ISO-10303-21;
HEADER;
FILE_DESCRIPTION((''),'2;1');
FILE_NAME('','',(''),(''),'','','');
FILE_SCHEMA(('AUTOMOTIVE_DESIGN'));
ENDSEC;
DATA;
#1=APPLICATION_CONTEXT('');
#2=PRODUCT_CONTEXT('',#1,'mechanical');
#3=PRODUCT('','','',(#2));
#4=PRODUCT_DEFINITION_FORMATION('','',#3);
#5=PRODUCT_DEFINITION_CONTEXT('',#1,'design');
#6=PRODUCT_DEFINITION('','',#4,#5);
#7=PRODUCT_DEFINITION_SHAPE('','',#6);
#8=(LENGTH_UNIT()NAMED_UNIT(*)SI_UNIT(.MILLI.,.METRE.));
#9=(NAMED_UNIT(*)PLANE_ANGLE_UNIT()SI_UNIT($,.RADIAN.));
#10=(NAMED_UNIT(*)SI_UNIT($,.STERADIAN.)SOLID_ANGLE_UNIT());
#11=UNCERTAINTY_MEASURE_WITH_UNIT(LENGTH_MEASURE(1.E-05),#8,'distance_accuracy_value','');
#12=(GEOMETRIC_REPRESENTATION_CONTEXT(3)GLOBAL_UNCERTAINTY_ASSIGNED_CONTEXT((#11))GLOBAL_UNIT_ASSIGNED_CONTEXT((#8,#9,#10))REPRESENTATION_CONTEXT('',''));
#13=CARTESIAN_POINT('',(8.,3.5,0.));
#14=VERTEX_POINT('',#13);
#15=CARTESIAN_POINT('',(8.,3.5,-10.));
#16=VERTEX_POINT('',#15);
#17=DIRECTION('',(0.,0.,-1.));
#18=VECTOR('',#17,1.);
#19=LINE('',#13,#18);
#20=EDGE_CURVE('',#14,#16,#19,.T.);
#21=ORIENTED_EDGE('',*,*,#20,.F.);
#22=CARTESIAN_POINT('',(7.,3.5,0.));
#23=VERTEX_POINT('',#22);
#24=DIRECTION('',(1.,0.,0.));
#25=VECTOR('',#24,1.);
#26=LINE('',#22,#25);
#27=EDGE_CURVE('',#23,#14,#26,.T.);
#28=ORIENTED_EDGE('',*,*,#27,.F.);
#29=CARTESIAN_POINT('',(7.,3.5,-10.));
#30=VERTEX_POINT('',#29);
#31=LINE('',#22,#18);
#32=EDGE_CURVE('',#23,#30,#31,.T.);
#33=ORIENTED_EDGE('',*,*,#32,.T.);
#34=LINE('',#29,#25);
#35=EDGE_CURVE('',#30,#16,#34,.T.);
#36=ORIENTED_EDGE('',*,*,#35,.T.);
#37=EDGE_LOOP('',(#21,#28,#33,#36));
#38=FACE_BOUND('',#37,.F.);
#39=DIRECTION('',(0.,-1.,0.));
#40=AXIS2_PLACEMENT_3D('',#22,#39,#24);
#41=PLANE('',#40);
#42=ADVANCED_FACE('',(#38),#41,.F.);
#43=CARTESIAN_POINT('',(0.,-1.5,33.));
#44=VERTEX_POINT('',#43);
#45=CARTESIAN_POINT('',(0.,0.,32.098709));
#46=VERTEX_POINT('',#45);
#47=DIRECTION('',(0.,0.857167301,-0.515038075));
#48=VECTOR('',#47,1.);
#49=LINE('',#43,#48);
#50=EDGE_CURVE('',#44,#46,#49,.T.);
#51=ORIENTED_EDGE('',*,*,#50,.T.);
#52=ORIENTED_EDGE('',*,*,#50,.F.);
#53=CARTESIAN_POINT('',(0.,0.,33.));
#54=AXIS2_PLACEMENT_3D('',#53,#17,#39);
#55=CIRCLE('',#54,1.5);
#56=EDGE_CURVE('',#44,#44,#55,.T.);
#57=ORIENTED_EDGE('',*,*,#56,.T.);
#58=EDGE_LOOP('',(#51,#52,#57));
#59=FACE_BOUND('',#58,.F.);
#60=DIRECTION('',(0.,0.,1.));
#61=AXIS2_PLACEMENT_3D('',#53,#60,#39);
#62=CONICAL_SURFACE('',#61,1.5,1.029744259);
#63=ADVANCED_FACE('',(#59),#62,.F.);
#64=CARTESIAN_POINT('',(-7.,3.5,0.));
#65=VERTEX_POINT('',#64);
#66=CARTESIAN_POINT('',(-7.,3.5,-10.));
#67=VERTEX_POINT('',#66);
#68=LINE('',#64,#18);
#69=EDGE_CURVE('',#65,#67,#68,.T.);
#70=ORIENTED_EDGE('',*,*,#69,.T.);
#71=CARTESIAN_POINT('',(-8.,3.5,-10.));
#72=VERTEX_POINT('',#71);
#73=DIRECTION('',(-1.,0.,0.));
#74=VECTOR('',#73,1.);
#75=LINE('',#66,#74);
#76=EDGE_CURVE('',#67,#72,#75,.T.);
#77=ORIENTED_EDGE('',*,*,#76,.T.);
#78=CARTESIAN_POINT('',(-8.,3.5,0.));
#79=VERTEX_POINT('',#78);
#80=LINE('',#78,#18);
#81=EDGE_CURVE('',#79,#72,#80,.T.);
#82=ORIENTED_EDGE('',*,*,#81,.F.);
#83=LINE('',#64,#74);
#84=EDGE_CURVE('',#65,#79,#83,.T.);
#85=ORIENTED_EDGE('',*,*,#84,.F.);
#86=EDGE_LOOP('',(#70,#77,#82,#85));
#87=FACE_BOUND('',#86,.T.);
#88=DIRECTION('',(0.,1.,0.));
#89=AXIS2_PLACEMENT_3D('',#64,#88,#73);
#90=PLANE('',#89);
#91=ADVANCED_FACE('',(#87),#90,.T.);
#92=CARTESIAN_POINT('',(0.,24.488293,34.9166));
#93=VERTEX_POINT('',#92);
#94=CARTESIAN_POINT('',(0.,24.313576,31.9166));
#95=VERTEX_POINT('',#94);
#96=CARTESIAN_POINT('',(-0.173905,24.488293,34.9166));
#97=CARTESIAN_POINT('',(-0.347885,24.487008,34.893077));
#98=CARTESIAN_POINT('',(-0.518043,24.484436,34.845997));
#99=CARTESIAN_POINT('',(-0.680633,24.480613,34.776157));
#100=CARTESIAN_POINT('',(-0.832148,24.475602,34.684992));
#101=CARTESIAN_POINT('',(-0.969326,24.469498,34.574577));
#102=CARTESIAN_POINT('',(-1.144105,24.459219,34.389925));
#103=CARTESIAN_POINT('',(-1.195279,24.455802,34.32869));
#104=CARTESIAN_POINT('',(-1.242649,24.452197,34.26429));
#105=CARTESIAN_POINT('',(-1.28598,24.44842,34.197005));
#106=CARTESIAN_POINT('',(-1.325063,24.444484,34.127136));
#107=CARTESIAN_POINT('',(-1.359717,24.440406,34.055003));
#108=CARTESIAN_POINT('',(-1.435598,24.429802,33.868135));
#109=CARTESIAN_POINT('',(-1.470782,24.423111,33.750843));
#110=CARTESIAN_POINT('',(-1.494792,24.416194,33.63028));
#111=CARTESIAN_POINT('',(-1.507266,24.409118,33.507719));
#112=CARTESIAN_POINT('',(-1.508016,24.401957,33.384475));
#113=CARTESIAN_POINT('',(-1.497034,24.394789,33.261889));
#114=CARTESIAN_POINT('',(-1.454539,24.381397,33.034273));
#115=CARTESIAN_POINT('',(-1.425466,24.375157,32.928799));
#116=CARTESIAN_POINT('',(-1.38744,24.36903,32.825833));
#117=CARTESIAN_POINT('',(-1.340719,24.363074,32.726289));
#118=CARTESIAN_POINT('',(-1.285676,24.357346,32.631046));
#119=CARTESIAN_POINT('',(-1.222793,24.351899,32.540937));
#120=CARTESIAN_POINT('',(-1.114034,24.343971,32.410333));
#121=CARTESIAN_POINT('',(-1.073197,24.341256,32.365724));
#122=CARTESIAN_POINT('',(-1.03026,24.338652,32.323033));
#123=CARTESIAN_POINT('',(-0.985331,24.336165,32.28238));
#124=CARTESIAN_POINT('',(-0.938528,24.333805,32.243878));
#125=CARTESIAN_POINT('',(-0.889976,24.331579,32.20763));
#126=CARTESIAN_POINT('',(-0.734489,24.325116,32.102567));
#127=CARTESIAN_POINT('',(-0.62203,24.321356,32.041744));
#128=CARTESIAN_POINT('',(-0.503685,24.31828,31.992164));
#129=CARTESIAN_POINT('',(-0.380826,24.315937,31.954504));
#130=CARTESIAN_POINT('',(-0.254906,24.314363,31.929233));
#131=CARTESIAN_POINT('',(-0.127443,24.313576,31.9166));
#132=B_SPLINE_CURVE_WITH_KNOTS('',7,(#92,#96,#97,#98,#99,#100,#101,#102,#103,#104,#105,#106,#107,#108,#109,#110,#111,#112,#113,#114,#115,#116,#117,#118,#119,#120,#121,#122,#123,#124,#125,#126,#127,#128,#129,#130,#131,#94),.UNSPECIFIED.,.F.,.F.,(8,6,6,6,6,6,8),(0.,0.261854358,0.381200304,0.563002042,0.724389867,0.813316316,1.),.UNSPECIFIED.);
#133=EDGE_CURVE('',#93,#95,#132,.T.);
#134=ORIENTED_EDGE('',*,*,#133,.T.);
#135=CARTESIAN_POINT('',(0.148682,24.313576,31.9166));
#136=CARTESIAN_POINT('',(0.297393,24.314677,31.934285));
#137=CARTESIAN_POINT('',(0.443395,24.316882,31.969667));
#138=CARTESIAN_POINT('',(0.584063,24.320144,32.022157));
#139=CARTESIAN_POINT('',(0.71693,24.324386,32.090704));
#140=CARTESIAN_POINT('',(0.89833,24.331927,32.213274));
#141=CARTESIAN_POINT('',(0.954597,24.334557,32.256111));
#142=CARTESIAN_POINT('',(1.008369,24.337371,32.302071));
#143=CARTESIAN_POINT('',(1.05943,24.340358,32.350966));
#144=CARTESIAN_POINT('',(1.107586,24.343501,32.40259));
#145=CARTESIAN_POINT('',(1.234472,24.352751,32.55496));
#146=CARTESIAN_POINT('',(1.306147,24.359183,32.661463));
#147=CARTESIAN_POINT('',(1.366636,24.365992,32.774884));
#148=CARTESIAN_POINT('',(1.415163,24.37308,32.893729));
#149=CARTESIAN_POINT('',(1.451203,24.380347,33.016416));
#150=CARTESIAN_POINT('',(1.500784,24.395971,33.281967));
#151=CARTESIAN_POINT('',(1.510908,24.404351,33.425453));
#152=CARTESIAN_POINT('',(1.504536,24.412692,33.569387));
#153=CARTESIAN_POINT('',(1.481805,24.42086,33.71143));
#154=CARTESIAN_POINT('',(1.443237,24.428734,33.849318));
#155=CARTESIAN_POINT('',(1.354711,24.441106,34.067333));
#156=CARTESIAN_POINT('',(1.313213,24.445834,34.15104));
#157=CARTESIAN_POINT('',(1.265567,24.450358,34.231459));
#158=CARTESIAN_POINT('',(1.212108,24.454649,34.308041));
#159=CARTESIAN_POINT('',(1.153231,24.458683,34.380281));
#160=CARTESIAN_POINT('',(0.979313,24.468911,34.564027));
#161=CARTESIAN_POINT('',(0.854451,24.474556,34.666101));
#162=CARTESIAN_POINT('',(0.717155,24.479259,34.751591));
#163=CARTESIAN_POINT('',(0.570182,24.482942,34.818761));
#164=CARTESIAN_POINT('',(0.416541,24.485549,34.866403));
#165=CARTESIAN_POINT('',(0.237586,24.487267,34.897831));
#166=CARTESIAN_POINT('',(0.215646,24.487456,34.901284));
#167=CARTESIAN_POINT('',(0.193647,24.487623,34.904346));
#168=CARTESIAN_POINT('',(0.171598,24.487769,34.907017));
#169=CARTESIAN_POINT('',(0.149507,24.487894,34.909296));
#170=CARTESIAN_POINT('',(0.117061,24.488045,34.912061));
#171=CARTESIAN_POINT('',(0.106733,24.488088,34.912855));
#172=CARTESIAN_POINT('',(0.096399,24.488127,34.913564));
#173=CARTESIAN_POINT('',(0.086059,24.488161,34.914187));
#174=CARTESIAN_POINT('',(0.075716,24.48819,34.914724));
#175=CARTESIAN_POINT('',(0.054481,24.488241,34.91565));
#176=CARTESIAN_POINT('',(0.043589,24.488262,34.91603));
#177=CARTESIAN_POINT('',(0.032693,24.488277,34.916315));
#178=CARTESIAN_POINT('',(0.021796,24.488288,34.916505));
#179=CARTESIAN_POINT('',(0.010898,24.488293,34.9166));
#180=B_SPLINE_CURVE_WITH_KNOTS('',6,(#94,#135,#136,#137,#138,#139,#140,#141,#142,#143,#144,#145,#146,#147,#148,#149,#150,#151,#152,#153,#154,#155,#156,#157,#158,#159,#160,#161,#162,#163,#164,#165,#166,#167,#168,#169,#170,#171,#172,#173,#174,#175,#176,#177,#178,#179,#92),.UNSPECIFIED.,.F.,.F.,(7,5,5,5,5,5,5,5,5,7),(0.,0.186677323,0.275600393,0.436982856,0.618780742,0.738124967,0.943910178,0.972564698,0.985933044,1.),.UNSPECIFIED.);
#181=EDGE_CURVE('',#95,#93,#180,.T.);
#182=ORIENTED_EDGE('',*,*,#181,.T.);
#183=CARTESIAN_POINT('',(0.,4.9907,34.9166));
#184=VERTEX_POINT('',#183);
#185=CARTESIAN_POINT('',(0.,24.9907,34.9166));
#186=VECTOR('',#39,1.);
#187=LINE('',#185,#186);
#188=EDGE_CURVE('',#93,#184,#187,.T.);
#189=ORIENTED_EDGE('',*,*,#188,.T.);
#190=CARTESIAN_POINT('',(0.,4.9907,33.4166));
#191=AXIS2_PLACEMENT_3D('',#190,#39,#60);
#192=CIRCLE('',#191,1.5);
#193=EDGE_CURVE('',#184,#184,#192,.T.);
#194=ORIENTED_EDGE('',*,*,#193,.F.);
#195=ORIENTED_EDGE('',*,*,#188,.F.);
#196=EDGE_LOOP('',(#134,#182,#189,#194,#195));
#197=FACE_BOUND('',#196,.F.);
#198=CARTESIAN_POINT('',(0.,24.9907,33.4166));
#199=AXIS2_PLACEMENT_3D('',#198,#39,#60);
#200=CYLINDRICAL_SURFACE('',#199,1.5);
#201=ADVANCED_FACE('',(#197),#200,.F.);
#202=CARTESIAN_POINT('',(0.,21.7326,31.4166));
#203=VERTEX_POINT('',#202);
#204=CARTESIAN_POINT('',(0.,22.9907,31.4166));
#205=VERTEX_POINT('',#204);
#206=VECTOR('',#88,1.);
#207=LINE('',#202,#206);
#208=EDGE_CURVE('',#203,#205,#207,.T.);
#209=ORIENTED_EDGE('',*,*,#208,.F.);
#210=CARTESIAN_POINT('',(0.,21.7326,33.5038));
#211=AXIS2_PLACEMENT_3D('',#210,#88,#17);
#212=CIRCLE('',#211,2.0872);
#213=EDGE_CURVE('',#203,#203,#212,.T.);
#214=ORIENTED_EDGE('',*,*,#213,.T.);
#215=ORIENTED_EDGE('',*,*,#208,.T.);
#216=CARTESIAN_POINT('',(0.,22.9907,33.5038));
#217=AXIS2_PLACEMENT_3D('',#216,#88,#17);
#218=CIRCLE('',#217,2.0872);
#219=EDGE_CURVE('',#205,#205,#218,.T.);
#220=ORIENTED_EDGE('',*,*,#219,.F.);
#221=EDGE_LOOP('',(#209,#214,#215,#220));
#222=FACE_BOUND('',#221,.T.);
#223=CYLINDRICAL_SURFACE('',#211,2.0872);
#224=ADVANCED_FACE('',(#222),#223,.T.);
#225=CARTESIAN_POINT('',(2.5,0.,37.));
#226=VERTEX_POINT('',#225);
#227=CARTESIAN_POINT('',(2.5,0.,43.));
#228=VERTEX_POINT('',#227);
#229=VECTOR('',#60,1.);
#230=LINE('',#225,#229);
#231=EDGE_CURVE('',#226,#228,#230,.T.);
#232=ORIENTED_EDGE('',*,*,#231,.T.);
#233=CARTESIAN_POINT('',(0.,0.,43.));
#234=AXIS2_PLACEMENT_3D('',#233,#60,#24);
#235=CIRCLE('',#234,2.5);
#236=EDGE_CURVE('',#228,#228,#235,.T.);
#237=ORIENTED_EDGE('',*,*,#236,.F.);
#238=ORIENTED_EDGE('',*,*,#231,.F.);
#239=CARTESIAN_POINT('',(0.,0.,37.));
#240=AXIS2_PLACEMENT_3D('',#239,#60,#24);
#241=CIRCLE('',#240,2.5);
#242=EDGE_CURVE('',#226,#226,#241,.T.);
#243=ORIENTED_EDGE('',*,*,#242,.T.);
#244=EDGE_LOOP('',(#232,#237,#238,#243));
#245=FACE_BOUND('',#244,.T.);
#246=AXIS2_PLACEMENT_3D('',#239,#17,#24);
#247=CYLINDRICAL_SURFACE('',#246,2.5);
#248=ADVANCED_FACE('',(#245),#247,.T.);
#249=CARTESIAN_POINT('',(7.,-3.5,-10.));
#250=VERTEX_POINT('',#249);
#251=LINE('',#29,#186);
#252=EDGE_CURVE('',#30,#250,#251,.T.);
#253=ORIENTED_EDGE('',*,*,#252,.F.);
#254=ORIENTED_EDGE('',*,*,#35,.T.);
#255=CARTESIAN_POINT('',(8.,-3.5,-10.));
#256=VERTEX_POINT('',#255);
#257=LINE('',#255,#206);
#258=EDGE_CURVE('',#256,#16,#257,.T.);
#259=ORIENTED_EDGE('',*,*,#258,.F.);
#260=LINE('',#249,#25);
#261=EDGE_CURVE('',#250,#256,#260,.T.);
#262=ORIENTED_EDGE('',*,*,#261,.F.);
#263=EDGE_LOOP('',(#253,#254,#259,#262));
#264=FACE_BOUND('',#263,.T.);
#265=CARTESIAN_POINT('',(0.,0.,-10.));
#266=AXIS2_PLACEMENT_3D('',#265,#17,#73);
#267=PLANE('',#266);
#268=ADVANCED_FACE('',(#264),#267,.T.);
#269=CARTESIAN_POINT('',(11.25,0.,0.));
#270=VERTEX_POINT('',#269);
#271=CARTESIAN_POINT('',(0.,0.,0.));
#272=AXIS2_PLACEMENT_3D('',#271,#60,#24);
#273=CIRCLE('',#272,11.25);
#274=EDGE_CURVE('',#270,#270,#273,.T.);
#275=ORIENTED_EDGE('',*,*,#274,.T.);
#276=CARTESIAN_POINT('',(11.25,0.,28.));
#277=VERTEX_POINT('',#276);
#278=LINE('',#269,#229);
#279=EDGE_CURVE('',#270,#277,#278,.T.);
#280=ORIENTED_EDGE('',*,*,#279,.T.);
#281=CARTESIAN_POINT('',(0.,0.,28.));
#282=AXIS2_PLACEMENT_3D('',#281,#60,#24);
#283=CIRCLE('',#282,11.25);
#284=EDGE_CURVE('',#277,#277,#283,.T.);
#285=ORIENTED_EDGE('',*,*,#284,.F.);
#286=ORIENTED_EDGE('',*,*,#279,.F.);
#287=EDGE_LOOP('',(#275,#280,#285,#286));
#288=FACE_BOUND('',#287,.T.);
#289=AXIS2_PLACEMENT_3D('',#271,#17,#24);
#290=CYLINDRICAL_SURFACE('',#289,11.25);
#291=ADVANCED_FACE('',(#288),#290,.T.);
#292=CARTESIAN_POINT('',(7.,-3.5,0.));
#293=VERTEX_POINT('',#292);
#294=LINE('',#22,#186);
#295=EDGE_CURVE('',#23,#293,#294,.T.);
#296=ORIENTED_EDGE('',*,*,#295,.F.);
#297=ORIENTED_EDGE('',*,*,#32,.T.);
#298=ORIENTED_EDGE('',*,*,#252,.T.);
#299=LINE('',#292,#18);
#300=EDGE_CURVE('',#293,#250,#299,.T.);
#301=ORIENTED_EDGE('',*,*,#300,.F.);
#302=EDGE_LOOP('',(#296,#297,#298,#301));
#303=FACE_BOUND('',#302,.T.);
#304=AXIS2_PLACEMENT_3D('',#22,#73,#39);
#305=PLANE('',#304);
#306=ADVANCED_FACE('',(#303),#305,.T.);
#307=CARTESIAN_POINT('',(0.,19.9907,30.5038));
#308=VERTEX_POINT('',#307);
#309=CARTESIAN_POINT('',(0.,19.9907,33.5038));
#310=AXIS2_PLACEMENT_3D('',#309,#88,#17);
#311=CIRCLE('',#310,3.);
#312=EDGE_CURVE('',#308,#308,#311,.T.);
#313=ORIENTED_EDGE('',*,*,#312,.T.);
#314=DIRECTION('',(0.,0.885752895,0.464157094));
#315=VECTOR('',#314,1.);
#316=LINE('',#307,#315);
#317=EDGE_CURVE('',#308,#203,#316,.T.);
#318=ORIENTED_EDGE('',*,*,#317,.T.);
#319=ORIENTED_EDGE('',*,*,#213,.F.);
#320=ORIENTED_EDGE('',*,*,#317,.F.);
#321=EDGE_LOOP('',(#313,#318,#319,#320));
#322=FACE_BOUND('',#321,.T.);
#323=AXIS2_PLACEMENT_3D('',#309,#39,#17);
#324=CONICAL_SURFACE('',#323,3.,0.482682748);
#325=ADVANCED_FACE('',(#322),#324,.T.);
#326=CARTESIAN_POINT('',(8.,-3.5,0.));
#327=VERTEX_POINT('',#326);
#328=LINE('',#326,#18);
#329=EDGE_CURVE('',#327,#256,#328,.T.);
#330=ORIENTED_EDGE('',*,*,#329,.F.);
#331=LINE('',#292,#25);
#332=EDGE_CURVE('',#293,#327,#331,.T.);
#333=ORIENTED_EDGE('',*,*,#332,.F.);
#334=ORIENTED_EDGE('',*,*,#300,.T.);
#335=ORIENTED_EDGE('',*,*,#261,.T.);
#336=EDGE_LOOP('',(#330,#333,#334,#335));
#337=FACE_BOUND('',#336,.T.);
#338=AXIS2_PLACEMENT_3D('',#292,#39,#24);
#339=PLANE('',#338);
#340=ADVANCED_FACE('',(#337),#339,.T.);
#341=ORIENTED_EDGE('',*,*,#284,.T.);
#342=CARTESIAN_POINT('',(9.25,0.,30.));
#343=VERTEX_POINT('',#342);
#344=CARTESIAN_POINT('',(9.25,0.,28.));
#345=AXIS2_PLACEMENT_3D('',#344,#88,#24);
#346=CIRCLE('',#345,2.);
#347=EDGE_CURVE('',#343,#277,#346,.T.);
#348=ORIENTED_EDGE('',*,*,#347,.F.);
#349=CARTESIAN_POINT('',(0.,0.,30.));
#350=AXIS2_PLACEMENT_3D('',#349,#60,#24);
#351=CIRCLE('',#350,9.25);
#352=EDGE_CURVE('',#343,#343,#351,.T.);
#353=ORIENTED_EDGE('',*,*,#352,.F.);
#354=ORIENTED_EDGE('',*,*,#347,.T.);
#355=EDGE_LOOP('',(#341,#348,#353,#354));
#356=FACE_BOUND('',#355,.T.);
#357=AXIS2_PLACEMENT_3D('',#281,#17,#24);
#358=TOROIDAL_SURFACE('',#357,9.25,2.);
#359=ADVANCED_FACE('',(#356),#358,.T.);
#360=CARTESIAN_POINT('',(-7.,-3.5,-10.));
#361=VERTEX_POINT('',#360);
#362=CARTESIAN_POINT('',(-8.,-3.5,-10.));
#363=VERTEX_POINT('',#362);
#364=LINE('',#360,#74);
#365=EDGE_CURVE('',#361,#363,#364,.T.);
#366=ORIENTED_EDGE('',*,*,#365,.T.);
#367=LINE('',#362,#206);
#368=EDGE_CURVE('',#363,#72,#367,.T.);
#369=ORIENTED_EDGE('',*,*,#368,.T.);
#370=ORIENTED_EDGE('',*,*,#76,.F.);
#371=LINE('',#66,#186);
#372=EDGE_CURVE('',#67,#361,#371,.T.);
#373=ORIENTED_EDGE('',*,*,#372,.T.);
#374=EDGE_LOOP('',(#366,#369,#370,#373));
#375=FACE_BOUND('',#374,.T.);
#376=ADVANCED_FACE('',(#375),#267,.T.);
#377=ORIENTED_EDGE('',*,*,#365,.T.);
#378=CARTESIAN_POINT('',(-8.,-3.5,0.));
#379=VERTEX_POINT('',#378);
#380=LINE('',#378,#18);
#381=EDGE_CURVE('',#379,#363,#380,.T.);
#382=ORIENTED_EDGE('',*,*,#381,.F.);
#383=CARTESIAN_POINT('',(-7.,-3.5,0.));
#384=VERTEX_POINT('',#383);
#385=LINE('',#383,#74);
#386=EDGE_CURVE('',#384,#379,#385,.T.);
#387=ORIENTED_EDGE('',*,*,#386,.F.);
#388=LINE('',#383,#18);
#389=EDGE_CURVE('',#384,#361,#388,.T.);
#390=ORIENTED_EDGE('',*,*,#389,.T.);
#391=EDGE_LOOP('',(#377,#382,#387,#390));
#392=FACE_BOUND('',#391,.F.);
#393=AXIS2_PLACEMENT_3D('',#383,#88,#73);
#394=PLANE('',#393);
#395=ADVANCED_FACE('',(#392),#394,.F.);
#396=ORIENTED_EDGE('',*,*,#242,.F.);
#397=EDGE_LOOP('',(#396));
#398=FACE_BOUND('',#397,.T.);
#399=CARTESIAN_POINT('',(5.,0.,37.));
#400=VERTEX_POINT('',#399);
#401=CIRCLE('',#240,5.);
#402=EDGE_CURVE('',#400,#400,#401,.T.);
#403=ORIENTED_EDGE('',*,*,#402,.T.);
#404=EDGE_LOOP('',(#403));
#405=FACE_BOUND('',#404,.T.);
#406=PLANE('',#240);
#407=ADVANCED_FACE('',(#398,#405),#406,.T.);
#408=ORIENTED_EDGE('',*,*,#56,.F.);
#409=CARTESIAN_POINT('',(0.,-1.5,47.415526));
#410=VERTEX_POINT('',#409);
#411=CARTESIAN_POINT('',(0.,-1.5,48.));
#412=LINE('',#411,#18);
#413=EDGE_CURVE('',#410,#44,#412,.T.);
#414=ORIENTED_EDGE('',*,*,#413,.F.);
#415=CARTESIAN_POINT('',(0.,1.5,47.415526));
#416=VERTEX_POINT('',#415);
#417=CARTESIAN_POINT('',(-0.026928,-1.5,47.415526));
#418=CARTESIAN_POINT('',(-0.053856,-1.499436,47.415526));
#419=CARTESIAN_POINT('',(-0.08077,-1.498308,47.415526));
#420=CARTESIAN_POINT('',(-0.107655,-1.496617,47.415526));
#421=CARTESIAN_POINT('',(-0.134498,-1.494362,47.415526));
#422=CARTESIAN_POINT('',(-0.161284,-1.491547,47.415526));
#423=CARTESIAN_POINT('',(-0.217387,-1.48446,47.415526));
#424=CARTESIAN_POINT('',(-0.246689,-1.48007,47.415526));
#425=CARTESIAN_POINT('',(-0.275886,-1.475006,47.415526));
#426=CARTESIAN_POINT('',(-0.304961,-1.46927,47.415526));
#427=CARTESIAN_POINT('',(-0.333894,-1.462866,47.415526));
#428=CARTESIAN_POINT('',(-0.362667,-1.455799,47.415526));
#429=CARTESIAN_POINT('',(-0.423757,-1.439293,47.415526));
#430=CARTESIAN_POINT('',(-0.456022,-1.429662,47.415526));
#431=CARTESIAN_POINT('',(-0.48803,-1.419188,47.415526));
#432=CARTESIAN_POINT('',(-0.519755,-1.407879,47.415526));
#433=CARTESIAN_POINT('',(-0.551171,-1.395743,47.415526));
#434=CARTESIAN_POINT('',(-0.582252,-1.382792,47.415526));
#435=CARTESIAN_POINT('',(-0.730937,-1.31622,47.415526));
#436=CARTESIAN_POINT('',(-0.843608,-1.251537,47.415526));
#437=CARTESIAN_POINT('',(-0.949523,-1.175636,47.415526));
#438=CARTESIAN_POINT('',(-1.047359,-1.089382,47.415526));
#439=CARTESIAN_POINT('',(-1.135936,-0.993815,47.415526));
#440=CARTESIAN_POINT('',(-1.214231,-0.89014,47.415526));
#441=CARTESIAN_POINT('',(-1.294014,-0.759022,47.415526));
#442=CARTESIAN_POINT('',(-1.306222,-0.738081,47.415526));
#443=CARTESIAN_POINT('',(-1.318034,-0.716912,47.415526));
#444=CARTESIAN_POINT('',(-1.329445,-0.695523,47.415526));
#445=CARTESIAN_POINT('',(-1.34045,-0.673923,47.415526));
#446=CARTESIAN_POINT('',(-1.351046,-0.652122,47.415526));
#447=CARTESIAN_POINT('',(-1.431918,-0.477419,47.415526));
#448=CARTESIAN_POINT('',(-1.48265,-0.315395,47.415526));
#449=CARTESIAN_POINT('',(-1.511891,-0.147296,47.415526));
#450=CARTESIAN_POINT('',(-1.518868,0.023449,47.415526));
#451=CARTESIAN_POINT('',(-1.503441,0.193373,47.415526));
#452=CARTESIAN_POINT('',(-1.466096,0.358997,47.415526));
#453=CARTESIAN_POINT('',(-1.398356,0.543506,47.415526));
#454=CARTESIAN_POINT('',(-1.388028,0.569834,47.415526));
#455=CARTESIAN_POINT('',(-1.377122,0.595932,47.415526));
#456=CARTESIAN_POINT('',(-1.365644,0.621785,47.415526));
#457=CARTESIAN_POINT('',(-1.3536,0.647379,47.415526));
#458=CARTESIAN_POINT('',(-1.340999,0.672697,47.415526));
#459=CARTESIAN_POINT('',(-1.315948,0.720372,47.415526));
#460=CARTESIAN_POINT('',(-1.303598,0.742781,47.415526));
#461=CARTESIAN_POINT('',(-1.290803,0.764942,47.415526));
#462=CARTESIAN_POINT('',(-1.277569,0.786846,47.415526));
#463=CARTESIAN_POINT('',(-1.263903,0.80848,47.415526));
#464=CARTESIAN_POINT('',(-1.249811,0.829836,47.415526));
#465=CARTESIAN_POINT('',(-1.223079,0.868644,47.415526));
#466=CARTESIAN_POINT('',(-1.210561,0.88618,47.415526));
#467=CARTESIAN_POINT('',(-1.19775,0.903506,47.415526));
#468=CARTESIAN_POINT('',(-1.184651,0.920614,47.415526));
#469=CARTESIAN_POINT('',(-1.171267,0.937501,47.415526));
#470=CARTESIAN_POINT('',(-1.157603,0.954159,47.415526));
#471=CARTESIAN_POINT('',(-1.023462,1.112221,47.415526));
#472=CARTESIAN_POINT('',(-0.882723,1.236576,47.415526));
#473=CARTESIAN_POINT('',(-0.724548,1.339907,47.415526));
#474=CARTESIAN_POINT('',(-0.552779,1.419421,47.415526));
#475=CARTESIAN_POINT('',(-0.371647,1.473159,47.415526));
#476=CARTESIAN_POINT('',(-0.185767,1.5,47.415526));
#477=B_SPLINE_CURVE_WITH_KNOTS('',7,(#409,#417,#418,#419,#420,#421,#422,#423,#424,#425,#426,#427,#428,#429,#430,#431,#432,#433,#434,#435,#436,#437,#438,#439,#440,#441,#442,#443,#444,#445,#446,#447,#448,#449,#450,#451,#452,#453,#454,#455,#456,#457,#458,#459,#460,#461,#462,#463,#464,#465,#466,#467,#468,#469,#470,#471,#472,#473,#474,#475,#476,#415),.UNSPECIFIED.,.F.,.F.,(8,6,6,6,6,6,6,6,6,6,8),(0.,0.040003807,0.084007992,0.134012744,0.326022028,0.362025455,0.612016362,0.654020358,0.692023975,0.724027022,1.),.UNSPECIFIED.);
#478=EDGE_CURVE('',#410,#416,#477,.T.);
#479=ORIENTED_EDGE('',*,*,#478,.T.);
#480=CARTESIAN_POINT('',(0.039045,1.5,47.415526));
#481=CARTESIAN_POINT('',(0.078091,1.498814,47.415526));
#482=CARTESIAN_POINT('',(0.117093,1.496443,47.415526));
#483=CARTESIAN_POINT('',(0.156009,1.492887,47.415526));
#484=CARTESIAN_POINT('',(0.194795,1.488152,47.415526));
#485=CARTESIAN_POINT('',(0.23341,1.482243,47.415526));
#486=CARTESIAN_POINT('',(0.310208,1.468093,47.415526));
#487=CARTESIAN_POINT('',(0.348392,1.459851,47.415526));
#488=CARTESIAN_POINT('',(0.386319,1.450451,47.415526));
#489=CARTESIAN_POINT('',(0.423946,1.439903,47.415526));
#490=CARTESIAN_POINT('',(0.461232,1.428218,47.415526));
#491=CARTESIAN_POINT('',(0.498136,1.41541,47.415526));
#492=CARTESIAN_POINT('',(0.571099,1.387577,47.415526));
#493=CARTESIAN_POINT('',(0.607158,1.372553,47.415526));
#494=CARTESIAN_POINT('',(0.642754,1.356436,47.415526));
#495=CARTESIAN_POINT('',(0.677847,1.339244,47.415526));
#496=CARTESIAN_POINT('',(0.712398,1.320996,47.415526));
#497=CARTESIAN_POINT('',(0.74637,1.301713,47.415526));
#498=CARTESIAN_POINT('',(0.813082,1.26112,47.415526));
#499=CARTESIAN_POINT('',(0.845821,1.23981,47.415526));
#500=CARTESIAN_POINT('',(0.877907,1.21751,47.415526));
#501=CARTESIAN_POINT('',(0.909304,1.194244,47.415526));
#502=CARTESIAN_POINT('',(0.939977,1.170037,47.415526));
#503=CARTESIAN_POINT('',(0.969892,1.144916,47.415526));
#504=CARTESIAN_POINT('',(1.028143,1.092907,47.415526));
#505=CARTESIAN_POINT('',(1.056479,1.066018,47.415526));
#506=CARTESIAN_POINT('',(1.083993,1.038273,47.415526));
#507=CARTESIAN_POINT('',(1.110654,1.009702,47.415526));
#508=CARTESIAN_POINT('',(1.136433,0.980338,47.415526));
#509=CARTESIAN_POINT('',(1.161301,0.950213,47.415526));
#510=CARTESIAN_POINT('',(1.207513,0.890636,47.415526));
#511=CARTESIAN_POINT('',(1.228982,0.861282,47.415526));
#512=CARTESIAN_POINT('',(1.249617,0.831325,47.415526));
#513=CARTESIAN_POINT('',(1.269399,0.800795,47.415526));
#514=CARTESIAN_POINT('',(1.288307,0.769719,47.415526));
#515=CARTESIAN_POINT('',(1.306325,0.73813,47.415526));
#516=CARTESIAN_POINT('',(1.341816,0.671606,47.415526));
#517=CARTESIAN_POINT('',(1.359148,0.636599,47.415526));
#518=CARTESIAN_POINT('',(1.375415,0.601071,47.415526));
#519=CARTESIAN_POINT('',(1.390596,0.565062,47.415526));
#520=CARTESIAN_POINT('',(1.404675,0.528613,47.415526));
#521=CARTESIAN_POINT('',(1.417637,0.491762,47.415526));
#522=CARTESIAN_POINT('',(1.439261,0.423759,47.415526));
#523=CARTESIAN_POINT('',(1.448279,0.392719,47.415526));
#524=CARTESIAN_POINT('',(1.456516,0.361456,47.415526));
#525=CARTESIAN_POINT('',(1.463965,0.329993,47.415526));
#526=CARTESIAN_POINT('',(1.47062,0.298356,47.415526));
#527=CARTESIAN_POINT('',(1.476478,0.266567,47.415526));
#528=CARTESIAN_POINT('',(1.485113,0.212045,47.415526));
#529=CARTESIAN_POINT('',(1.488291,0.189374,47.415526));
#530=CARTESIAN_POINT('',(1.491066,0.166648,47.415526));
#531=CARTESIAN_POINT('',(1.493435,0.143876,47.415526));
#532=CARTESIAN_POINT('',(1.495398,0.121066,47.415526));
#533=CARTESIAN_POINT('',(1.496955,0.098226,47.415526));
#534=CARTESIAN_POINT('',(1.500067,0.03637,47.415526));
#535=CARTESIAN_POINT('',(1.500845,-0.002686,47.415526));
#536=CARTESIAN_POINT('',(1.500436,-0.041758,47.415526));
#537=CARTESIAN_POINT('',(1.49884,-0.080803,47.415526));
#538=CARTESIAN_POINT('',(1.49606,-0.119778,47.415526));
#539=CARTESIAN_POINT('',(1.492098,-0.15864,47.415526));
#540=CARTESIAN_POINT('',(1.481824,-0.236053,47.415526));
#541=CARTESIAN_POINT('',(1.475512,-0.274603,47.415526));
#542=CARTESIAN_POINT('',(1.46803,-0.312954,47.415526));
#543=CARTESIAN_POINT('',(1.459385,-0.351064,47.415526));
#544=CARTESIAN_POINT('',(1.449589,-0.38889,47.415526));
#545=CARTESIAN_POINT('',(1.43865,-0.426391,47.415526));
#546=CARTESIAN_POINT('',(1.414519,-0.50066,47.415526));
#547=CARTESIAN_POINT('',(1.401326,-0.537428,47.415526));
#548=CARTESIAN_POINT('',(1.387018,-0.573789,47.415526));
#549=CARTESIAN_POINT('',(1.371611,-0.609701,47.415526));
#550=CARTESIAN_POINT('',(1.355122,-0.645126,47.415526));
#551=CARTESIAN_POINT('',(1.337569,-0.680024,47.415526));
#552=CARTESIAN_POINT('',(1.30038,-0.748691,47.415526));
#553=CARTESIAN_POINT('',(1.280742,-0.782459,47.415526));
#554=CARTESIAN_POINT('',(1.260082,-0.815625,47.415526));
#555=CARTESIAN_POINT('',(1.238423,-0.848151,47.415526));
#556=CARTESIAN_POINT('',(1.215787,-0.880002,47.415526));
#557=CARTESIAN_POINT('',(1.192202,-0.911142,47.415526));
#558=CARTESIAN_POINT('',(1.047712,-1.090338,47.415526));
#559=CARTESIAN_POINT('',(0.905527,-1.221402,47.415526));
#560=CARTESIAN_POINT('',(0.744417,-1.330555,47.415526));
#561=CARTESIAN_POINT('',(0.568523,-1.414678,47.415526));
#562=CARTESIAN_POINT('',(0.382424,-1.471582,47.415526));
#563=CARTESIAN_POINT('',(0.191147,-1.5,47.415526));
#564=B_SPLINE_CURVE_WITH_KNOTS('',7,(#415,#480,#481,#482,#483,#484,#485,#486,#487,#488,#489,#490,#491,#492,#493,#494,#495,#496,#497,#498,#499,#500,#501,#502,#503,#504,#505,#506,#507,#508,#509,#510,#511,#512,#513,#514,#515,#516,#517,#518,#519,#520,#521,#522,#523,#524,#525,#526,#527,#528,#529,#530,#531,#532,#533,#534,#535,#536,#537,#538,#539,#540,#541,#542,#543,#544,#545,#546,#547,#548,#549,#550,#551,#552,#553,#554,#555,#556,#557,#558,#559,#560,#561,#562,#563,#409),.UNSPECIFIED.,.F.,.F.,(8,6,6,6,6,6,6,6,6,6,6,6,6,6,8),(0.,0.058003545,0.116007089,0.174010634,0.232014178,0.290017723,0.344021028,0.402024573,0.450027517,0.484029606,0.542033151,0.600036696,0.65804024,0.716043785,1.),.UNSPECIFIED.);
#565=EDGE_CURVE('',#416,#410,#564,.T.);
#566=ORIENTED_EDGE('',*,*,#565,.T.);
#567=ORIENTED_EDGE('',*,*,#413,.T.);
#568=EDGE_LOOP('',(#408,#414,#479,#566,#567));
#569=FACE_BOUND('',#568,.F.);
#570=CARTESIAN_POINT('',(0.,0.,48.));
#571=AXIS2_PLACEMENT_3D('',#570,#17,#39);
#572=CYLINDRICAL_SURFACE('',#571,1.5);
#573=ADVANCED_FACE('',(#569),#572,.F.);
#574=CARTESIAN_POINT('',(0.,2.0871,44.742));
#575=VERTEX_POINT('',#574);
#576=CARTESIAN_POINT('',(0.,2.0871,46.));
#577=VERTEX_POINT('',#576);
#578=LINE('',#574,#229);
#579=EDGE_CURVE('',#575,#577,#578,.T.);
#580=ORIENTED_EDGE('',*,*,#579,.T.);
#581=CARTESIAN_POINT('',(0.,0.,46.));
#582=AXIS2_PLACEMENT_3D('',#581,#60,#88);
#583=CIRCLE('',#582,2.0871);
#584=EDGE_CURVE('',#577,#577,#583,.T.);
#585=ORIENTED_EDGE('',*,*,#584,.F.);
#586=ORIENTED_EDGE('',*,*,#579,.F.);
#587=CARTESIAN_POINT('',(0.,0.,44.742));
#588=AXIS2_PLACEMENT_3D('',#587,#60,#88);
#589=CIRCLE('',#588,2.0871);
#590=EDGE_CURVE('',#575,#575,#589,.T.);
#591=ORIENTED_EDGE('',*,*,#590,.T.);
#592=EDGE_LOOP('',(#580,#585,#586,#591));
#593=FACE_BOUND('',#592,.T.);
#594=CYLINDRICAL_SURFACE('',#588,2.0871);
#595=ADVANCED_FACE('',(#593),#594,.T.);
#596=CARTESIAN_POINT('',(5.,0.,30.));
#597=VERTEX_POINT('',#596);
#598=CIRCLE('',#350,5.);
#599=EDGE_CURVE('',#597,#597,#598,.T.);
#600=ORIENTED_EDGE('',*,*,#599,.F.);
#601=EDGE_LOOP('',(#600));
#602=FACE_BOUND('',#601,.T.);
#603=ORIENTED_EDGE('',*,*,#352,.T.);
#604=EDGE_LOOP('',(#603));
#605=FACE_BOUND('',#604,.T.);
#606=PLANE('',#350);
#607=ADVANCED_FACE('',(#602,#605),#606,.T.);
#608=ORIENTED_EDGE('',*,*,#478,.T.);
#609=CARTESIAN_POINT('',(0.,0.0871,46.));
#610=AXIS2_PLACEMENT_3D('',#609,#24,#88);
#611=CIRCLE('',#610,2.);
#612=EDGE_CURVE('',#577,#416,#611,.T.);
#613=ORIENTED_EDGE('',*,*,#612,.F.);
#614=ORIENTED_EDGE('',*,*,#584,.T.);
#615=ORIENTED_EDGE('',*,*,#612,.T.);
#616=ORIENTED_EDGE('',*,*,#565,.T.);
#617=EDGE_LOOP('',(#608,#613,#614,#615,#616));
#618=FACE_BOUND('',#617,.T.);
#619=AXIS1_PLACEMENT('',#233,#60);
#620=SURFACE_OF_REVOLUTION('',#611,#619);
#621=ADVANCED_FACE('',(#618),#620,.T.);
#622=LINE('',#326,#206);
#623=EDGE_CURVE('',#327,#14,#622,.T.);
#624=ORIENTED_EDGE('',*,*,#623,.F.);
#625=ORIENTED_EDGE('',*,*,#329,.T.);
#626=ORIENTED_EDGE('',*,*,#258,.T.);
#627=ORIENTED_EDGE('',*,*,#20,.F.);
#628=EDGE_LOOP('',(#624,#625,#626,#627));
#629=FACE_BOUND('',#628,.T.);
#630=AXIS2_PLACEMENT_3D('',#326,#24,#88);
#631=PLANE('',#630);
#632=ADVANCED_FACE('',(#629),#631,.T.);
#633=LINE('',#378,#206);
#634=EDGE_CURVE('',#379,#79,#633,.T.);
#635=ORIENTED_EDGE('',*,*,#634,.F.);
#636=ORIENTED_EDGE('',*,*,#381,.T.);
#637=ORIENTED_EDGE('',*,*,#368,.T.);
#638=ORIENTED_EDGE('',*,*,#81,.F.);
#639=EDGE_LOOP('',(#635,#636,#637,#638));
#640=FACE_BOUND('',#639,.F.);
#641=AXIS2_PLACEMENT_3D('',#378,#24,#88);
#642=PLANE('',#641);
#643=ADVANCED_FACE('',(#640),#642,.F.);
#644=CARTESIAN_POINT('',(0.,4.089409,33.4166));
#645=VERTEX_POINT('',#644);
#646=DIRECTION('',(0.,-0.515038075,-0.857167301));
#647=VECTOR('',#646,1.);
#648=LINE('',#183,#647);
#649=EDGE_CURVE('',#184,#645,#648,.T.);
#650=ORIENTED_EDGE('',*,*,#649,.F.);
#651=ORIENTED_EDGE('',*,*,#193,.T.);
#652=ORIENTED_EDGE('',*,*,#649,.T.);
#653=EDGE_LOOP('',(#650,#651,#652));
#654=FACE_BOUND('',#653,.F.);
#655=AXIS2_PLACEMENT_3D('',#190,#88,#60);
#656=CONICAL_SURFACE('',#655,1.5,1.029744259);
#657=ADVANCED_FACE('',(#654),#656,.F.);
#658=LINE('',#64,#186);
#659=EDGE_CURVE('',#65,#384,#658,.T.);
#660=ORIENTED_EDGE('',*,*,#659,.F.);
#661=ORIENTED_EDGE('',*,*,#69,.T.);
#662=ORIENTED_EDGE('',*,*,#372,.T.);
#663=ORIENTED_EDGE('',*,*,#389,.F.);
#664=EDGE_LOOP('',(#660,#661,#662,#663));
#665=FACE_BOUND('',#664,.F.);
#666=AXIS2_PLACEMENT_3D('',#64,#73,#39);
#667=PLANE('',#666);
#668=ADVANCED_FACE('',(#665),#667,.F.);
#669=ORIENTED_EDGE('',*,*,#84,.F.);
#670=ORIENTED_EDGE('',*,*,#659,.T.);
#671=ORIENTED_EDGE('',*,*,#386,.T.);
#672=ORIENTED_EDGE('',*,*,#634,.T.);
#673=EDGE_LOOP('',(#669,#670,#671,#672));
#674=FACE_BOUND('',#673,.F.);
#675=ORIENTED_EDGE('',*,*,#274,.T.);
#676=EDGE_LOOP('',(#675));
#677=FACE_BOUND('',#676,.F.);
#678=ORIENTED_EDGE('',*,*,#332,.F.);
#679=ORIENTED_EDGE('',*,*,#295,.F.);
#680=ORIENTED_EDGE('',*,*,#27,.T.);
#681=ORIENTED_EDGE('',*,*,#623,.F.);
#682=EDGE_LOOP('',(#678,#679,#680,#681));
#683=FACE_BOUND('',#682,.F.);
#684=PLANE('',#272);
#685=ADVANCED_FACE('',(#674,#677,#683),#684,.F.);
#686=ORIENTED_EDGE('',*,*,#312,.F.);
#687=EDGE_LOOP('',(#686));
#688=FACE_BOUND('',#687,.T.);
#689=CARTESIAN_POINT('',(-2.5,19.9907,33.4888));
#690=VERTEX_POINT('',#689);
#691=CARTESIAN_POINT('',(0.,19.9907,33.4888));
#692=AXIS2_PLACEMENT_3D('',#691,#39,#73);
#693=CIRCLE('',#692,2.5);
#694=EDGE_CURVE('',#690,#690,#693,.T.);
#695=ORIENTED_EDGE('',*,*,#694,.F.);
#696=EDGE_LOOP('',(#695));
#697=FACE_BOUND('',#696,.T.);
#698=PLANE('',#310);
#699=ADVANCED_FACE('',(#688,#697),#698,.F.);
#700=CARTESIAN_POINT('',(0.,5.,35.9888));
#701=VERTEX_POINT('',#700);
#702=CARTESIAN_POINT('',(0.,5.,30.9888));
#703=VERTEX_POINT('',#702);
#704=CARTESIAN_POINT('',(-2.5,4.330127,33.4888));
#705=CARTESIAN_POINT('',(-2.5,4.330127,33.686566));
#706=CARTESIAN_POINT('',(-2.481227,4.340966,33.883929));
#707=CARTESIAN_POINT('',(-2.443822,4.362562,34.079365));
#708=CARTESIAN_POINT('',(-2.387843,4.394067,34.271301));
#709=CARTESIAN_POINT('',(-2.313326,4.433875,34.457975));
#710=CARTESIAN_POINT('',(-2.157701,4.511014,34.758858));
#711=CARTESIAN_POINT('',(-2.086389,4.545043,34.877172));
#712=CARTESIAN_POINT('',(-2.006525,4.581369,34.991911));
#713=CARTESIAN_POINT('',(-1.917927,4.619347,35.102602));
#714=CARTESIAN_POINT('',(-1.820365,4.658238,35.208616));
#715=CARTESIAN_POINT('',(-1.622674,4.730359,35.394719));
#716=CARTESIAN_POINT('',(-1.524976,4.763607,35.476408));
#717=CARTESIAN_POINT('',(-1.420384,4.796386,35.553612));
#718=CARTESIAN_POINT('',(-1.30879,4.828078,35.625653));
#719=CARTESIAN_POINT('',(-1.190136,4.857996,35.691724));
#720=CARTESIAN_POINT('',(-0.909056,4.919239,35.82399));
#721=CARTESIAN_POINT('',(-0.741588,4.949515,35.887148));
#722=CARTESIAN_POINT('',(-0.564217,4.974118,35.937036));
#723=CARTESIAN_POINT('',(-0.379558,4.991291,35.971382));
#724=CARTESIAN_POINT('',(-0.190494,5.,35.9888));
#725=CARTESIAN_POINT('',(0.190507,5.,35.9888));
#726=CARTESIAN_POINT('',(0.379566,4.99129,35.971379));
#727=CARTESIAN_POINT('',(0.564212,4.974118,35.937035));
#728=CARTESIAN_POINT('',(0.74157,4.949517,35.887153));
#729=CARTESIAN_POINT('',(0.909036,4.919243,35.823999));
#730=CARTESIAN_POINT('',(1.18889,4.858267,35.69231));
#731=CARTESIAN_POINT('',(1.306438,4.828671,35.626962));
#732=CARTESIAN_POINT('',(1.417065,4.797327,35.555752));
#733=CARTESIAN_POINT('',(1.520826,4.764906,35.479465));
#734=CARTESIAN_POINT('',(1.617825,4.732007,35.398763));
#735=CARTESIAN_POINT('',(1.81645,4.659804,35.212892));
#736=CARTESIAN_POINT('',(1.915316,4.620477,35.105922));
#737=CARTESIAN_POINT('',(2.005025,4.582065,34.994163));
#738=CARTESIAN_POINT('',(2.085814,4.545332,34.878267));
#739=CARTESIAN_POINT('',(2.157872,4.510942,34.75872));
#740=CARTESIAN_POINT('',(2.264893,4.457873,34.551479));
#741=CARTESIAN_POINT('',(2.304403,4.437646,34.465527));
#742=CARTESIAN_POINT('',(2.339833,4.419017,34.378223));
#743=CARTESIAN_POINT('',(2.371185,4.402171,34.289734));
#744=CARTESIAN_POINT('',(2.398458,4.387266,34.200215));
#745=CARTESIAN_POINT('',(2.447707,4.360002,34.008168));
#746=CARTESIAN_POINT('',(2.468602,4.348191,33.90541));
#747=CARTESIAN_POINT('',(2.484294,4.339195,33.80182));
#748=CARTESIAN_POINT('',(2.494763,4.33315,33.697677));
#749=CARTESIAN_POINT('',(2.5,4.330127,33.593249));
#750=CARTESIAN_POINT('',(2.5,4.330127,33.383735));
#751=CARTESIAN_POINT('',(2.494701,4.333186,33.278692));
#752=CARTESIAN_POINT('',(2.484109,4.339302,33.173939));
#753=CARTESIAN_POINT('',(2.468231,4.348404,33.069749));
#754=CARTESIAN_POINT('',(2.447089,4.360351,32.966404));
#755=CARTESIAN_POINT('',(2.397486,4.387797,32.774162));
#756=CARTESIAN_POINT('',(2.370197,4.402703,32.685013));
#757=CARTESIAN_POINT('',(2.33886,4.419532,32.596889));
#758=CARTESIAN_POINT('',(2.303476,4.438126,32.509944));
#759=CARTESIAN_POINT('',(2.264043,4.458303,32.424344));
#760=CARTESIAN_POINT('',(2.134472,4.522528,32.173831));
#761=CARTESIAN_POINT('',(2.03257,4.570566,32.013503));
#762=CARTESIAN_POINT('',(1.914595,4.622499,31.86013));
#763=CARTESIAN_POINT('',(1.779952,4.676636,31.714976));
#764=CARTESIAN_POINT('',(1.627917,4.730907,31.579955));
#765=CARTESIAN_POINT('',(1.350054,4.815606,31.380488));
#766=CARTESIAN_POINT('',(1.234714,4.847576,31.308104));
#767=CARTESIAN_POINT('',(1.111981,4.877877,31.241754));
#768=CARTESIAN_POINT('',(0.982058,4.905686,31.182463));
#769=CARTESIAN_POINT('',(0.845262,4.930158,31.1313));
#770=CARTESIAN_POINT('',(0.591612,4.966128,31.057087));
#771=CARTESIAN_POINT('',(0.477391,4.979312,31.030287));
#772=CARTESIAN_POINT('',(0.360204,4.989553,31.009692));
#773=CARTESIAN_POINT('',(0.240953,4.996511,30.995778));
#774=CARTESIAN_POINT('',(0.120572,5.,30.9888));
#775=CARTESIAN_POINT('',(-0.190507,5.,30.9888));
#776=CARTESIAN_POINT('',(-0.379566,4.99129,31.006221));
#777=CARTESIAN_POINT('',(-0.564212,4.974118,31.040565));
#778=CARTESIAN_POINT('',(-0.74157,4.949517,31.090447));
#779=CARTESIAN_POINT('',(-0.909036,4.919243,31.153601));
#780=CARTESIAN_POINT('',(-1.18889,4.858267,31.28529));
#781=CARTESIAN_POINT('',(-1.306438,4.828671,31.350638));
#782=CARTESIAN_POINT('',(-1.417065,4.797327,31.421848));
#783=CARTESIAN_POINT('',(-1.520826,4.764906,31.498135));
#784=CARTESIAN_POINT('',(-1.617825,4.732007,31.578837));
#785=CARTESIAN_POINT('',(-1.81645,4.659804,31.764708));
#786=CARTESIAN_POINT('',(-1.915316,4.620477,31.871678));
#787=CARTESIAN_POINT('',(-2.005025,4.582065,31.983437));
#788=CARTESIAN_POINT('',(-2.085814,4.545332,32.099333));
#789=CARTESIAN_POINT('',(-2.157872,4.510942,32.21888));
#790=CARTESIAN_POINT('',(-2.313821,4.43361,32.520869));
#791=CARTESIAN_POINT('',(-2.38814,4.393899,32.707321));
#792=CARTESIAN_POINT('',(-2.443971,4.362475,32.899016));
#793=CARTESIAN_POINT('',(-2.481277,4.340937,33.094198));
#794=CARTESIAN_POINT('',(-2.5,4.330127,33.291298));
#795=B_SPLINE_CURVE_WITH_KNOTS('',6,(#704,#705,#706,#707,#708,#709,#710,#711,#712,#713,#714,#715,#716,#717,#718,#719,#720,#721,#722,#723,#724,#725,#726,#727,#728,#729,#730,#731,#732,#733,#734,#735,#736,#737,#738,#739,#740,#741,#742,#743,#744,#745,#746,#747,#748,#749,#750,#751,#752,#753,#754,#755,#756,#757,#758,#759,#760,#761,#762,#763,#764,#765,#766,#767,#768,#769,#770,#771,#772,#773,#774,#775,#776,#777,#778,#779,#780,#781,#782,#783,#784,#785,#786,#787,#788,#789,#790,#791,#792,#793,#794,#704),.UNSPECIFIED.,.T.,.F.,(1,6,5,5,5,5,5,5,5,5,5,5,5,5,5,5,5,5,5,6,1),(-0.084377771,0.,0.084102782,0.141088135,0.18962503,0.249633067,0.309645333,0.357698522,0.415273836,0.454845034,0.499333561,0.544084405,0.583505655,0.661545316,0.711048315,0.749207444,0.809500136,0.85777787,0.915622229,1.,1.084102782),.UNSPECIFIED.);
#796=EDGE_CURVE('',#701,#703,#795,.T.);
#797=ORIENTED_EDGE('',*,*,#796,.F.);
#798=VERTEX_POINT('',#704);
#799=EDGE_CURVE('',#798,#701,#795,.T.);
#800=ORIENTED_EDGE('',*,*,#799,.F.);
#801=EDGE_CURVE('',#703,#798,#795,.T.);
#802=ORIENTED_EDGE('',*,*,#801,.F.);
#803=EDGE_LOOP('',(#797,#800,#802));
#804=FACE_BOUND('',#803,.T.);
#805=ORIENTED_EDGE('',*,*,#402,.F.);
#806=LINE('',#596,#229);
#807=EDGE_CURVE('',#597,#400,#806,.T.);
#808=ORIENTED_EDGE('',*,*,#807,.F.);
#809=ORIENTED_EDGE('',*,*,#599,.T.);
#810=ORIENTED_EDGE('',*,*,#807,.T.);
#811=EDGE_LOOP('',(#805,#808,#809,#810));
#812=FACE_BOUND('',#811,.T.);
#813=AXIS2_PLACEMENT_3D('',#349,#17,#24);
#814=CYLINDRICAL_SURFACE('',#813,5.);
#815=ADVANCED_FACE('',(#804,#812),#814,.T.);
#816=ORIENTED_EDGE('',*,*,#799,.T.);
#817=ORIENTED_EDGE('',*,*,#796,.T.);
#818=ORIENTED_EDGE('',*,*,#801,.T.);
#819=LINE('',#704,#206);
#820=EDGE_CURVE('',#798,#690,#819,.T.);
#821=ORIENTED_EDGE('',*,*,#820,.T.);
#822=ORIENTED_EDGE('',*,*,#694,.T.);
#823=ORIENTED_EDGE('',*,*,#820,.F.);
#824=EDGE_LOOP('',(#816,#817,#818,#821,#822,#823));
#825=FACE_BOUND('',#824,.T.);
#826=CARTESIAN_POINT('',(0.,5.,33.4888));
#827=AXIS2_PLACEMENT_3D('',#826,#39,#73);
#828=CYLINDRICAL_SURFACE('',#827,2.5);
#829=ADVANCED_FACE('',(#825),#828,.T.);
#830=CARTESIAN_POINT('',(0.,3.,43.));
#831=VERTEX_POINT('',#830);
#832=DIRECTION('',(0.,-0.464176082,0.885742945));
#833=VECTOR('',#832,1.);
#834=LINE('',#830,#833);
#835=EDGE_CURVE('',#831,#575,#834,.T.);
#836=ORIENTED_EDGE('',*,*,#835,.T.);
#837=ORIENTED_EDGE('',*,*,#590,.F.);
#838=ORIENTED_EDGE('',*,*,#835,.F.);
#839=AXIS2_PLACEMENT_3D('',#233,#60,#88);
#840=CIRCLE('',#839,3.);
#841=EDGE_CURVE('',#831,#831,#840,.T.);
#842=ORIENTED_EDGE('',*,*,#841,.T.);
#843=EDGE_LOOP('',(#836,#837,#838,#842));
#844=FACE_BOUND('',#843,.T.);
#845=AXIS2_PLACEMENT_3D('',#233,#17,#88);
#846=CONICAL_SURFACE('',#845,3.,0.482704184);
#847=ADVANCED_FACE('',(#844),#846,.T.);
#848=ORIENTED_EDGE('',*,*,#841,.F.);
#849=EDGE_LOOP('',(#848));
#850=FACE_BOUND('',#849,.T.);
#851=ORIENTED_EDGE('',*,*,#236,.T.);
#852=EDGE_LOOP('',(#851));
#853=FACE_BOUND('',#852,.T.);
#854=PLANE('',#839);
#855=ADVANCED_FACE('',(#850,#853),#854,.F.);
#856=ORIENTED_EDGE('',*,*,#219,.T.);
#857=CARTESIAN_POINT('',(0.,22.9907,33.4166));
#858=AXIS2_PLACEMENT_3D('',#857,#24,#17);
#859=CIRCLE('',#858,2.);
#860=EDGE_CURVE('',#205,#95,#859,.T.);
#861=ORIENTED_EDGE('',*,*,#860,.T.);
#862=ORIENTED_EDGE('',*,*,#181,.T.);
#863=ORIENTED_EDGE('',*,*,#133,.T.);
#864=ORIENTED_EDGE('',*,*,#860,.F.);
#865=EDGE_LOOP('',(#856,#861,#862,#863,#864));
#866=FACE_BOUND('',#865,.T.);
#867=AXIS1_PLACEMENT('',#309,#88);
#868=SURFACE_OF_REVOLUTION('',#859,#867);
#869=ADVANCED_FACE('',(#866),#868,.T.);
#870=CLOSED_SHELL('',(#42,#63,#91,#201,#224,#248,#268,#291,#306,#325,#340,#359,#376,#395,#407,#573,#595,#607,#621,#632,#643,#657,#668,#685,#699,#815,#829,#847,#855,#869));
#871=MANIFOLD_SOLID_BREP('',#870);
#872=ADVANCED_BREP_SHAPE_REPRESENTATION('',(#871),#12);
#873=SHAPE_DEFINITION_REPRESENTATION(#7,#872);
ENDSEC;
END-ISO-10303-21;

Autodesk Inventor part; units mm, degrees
ref_plane "XY Plane" through (0, 0, 0) normal (0, 0, 1) x (1, 0, 0)
sketch "Block1" plane through (0, 0, 0) normal (0, 0, 1) x (1, 0, 0)
  line L0 (-0.685, 86) -> (2.315, 86)
  line L1 (-0.685, 86) -> (-0.685, 91)
  line L2 (2.315, 86) -> (1.4022, 87.742)
  line L3 (1.4022, 87.742) -> (1.4022, 89)
  line L4 (-0.5978, 91) -> (-0.685, 91)
  arc A0 (1.4022, 89) -> (-0.5978, 91) centre (-0.5978, 89) ccw
  point P0 (0.6511, 88.4856)
  dimension "d9" = 3
  dimension "d10" = 5
  dimension "d11" = 2
  dimension "d14" = 152.344
  dimension "d15" = 2.0871
sketch "Skizze1" plane through (0, 0, 0) normal (0, 0, 1) x (1, 0, 0)
  point P0 (0, 0)
sketch "Skizze2" plane through (0, 0, 0) normal (0, 0, 1) x (1, 0, 0)
  circle A0 centre (0, 0) radius 11.25
  dimension "d0" = 22.5
extrude "Extrusion1" add sketch "Skizze2" along normal blind 30
sketch "Skizze3" plane through (0, 0, 30) normal (0, 0, 1) x (1, 0, 0)
  circle A0 centre (0, 0) radius 11.25 projected
  circle A1 centre (0, 0) radius 5
  dimension "d3" = 10
extrude "Extrusion2" add sketch "Skizze3" along normal blind 7 contours A1
sketch "Skizze4" plane through (0, 0, 37) normal (0, 0, 1) x (1, 0, 0)
  circle A0 centre (0, 0) radius 5 projected
  circle A1 centre (0, 0) radius 2.5
  dimension "d6" = 5
extrude "Extrusion3" add sketch "Skizze4" along normal blind 6 contours A1
sketch "Skizze5" plane through (0, 0, 0) normal (1, 0, 0) x (0, 1, 0)
  line L0 (2.5, 43) -> (-2.5, 43) projected
  line L1 (-2.5, 43) -> (2.5, 43) construction
  line L2 (0, 43) -> (3, 43)
  line L3 (0, 43) -> (0, 48)
  line L4 (3, 43) -> (2.0871, 44.742)
  line L5 (2.0871, 44.742) -> (2.0871, 46)
  line L6 (0.0871, 48) -> (0, 48)
  arc A0 (2.0871, 46) -> (0.0871, 48) centre (0.0871, 46) ccw
  point P0 (0, 0)
sketch "Skizze6" plane through (0, 0, 0) normal (0, 0, -1) x (-1, 0, 0)
  line L0 (7, 3.5) -> (7, -3.5)
  line L1 (7, -3.5) -> (8, -3.5)
  line L2 (7, 3.5) -> (8, 3.5)
  line L3 (8, -3.5) -> (8, 3.5)
  line L4 (0, 11.25) -> (0, -11.25) construction
  line L5 (-7, 3.5) -> (-7, -3.5)
  line L6 (-7, -3.5) -> (-8, -3.5)
  line L7 (-7, 3.5) -> (-8, 3.5)
  line L8 (-8, -3.5) -> (-8, 3.5)
  point P0 (0, 0)
  dimension "d19" = 7
  dimension "d20" = 1
  dimension "d21" = 7
  dimension "d23" = 3.5
extrude "Extrusion4" add sketch "Skizze6" along normal blind 10
revolve "Umdrehung2" add sketch "Skizze5" angle 360 about axis through (0, 0, 43) along (0, 0, 1)
ref_plane "Arbeitsebene2" through (0, 5, 30) normal (0, 1, 0) x (-1, 0, 0)
ref_plane "Arbeitsebene1" through (0, 5, 30) normal (0, 1, 0) x (-1, 0, 0)
sketch "Skizze7" plane through (0, 5, 30) normal (0, 1, 0) x (-1, 0, 0)
  circle A0 centre (0, 3.4888) radius 2.5
  point P0 (0, -30)
  dimension "d27" = 5
extrude "Extrusion5" add sketch "Skizze7" along normal blind 15 and the other way blind 3
sketch "Skizze9" plane through (0, 0, 0) normal (1, 0, 0) x (0, 1, 0)
  point P0 (0, 0)
sketch "Skizze10" plane through (0, 0, 0) normal (1, 0, 0) x (0, 1, 0)
  point P0 (0, 0)
ref_plane "Arbeitsebene6" through (0, 0, 0) normal (1, 0, 0) x (0, 1, 0)
ref_plane "Arbeitsebene7" through (0, 20, 33.4888) normal (0, 1, 0) x (1, 0, 0)
sketch "Skizze11" plane through (0, 0, 0) normal (1, 0, 0) x (0, 1, 0)
  point P0 (0, 0)
sketch "Skizze12" plane through (0, 0, 0) normal (1, 0, 0) x (0, 1, 0)
  line L0 (0, 0) -> (0, 41.8024) construction
sketch "Skizze13" plane through (0, 0, 0) normal (1, 0, 0) x (0, 1, 0)
  line L0 (0, 43) -> (3, 43)
  line L1 (0, 43) -> (0, 48)
  line L2 (3, 43) -> (2.0871, 44.742)
  line L3 (2.0871, 44.742) -> (2.0871, 46)
  line L4 (0.0871, 48) -> (0, 48)
  arc A0 (2.0871, 46) -> (0.0871, 48) centre (0.0871, 46) ccw
  line L5 (19.9907, 33.5038) -> (19.9907, 30.5038)
  line L6 (19.9907, 33.5038) -> (24.9907, 33.5038)
  line L7 (19.9907, 30.5038) -> (21.7326, 31.4166)
  line L8 (21.7326, 31.4166) -> (22.9907, 31.4166)
  line L9 (24.9907, 33.4166) -> (24.9907, 33.5038)
  arc A1 (22.9907, 31.4166) -> (24.9907, 33.4166) centre (22.9907, 33.4166) ccw
  point P0 (0, 0)
revolve "Umdrehung3" add sketch "Skizze13" angle 360 about axis through (0, 19.9907, 33.5038) along (0, 1, 0) contours L6 L9 A1 L8 L7 L5
fillet "Rundung1" radius 2 1 edges at (-11.25, 0, 30)
ref_plane "Arbeitsebene8" through (0, 0.0871, 48) normal (0, 0, 1) x (1, 0, 0)
sketch "Skizze14" plane through (0, 0.0871, 48) normal (0, 0, 1) x (1, 0, 0)
  point P0 (0, -0.0871)
  point P1 (0, -0.0871)
hole "Bohrung1" at (0, 0, 48) direction (0, 0, -1) diameter 3 depth 15 tip angle 118
ref_plane "Arbeitsebene9" through (0, 24.9907, 33.4166) normal (0, 1, 0) x (-1, 0, 0)
sketch "Skizze15" plane through (0, 24.9907, 33.4166) normal (0, 1, 0) x (-1, 0, 0)
  point P0 (0, -33.4166)
  point P1 (0, 0)
hole "Bohrung2" at (0, 24.9907, 33.4166) direction (0, -1, 0) diameter 3 depth 20 tip angle 118
properties part number "Ventil"
